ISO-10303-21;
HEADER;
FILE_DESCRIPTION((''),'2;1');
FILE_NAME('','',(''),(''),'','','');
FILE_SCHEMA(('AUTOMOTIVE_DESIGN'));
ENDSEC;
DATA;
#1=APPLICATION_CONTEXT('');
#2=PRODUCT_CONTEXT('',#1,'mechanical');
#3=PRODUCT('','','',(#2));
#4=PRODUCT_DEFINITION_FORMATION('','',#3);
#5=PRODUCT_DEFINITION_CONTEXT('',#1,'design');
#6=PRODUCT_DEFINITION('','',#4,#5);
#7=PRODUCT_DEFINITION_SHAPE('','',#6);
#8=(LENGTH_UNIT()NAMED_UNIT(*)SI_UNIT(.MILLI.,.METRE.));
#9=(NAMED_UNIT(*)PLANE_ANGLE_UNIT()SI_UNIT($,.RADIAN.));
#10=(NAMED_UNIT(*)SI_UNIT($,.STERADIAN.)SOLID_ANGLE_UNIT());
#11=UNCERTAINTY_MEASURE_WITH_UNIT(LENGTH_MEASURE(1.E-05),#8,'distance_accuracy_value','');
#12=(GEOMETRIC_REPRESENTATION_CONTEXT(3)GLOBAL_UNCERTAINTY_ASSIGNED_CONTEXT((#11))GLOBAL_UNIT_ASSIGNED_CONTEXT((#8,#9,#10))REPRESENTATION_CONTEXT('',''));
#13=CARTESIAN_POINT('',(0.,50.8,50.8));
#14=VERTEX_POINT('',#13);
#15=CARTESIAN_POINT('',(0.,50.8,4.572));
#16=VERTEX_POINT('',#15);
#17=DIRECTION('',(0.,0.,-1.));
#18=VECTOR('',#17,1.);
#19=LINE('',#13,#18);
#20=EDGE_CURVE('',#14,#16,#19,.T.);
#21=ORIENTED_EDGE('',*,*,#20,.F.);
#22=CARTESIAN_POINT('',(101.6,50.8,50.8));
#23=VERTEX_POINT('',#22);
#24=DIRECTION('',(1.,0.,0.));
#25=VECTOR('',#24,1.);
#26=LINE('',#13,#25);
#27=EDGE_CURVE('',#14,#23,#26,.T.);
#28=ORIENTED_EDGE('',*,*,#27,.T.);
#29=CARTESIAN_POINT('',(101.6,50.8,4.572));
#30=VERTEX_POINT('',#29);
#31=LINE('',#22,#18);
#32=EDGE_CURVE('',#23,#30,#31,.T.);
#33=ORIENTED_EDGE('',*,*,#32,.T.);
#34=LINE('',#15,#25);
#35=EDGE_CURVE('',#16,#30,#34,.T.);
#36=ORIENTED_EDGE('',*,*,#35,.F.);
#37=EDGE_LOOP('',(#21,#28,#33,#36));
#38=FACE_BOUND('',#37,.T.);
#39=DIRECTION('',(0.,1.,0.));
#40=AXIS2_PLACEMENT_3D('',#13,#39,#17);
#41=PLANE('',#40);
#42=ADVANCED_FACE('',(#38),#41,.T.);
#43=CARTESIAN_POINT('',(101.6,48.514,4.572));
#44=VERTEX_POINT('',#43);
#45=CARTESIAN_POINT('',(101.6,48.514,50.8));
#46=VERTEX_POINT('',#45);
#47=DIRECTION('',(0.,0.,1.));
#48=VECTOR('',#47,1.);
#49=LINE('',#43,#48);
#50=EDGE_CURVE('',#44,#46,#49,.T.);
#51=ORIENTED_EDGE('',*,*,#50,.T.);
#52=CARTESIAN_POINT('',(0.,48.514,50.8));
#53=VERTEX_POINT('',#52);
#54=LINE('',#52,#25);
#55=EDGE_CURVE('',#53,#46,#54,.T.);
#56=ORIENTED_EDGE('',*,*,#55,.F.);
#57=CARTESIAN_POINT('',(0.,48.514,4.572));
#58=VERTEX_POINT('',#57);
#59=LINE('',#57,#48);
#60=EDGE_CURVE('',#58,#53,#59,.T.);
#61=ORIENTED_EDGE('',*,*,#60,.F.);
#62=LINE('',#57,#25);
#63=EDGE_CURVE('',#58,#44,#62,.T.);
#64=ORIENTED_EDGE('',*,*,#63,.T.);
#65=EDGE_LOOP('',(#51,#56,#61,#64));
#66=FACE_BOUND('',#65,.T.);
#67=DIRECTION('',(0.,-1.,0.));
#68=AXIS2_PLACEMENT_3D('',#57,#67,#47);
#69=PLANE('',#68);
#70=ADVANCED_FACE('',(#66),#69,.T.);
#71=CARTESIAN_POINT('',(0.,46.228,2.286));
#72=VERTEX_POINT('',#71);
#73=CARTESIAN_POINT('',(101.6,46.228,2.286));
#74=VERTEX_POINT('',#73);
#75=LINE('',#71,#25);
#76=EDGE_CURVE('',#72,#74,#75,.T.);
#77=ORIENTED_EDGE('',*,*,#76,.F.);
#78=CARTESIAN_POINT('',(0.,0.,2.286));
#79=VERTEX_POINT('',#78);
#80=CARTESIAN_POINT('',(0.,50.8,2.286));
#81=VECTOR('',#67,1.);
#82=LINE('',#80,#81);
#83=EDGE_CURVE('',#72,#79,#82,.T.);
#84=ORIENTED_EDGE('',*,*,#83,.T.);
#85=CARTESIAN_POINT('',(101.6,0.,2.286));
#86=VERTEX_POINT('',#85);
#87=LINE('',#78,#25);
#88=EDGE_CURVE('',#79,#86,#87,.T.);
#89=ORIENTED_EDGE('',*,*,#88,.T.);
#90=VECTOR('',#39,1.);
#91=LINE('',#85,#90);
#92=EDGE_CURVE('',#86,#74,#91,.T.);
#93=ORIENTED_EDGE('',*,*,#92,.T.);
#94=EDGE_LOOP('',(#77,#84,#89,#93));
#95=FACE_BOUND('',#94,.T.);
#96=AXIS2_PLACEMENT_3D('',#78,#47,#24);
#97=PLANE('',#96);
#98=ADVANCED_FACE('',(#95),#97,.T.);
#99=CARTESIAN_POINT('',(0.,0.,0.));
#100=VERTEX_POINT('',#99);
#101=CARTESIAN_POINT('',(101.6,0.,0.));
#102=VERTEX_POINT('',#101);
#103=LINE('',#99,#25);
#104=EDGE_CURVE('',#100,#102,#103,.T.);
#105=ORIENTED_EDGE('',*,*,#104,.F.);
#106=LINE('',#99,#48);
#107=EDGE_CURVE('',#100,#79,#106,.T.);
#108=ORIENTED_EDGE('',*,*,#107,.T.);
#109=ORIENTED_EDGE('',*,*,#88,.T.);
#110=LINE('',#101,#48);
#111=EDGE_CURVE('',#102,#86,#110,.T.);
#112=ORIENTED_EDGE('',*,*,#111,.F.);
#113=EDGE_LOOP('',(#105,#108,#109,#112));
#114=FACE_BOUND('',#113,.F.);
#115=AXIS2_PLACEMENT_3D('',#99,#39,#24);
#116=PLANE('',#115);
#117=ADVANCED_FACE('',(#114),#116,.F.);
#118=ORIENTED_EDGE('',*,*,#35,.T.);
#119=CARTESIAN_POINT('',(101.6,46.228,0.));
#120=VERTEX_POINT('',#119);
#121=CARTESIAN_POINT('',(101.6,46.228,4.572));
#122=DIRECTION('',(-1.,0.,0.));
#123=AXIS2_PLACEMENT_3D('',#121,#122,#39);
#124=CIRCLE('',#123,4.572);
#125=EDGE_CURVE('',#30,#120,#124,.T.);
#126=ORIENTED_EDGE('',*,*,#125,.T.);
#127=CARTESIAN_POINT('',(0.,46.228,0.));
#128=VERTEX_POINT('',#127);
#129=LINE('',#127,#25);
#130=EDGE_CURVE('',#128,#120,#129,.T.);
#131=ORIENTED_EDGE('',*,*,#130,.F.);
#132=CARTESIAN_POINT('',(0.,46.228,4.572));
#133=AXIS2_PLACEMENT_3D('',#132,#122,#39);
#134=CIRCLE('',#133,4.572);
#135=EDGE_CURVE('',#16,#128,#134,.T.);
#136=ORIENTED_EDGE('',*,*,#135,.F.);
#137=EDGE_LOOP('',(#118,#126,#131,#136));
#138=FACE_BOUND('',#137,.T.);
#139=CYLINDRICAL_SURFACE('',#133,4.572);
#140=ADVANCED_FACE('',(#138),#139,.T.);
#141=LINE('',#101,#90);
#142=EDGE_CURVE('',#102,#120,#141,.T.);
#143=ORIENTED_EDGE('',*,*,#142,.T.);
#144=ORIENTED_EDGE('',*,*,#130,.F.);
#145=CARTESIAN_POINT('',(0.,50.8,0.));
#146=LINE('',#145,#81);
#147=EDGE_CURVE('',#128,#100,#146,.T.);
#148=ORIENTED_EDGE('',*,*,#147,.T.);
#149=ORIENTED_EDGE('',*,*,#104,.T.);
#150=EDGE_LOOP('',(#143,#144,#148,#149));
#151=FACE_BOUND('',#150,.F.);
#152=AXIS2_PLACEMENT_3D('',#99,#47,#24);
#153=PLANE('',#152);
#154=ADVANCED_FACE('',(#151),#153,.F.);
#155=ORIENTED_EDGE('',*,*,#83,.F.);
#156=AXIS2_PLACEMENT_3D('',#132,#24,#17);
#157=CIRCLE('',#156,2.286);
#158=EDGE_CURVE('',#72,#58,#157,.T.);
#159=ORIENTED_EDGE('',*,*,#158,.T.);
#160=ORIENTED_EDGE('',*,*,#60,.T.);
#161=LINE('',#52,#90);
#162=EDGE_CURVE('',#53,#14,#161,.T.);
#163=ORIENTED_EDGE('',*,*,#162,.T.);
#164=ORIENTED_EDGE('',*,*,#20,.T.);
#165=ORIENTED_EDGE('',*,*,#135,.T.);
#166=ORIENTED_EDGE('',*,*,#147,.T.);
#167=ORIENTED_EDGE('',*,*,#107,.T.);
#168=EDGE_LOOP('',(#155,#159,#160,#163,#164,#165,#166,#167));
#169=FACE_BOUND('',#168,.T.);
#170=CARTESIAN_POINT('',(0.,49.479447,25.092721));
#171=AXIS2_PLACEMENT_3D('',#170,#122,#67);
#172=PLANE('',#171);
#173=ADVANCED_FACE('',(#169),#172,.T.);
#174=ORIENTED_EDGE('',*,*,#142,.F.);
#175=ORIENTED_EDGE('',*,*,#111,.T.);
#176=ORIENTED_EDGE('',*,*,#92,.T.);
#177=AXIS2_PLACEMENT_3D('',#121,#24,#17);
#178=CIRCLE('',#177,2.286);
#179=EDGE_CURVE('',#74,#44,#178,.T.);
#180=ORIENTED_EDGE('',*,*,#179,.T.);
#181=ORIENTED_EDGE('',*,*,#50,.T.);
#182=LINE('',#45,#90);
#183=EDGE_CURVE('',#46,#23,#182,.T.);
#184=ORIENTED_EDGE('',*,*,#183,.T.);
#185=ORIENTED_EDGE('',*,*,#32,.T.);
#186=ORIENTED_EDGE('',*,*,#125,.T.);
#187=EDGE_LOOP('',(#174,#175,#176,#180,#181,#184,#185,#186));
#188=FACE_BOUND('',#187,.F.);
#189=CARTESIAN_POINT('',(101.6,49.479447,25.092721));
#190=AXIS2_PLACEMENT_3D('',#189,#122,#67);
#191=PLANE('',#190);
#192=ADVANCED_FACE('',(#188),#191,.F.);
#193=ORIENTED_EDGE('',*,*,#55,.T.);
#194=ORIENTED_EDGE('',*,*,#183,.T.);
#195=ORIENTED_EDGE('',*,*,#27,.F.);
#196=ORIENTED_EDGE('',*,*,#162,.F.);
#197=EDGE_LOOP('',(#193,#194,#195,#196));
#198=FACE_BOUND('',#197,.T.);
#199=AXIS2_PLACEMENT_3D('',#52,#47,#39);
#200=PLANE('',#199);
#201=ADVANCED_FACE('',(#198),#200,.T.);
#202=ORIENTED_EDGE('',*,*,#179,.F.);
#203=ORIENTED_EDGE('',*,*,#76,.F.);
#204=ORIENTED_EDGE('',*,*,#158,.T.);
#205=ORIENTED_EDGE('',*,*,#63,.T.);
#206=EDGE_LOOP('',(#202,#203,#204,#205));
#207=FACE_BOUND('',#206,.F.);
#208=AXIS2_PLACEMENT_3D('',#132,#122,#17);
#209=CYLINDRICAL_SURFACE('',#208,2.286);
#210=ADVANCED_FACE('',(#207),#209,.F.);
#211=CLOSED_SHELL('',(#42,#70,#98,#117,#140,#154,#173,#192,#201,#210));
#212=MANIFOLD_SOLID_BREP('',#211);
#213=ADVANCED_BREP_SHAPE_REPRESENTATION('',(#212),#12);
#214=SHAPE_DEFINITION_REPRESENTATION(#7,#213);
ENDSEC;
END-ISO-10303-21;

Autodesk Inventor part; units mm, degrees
ref_plane "YZ Plane" through (0, 0, 0) normal (1, 0, 0) x (0, 1, 0)
ref_plane "XZ Plane" through (0, 0, 0) normal (0, 1, 0) x (-1, 0, 0)
ref_plane "XY Plane" through (0, 0, 0) normal (0, 0, 1) x (1, 0, 0)
sketch "Sketch1" plane through (0, 0, 0) normal (0, 0, 1) x (1, 0, 0)
  line L0 (0, 0) -> (101.6, 0)
  line L1 (101.6, 0) -> (101.6, 50.8)
  line L2 (101.6, 50.8) -> (0, 50.8)
  line L3 (0, 50.8) -> (0, 0)
  dimension "d0" = 101.6
  dimension "d1" = 50.8
extrude "Plate1" add sketch "Sketch1" along normal blind 2.286
sketch "Sketch2" plane through (0, 48.514, 0) normal (0, 1, 0) x (-1, 0, 0)
  line L0 (-101.6, 0) -> (0, 0)
  line L1 (0, 0) -> (0, 50.8)
  line L2 (0, 50.8) -> (-101.6, 50.8)
  line L3 (-101.6, 50.8) -> (-101.6, 0)
edge flange "Flange1" height 50.8 angle 90 thickness 2.286 bend radius 2.286 thickness toward (0, 1, 0) relief tear relief width 2.286 relief depth 1.143 edges at (50.8, 50.8, 2.286) wall of the first edge with corners at (101.6, 48.514, 0) (0, 48.514, 0) (0, 48.514, 50.8) (101.6, 48.514, 50.8)
bend "Bend1"
corner "Corner1"
equation "\"d3\" = BendReliefWidth"
equation "\"d4\" = BendReliefDepth"
equation "\"d5\" = MinimumRemnant"
equation "\"d6\" = BendRadius"
equation "\"d9\" = BendRadius"
equation "\"d10\" = CornerReliefSize"
equation "\"d11\" = GapSize"
equation "\"d12\" = JacobiRadiusSize"
equation "\"BendRadius\" = Thickness"
equation "\"BendReliefWidth\" = Thickness"
equation "\"BendReliefDepth\" = 0.5 * Thickness"
equation "\"CornerReliefSize\" = 4 * Thickness"
equation "\"MinimumRemnant\" = 2 * Thickness"
equation "\"TransitionRadius\" = BendRadius"
equation "\"JacobiRadiusSize\" = BendRadius"
equation "\"GapSize\" = Thickness"
equation "\"d2\" = BendRadius"
equation "\"Thickness\" = 2.286"
properties part number "MountingBracket"
